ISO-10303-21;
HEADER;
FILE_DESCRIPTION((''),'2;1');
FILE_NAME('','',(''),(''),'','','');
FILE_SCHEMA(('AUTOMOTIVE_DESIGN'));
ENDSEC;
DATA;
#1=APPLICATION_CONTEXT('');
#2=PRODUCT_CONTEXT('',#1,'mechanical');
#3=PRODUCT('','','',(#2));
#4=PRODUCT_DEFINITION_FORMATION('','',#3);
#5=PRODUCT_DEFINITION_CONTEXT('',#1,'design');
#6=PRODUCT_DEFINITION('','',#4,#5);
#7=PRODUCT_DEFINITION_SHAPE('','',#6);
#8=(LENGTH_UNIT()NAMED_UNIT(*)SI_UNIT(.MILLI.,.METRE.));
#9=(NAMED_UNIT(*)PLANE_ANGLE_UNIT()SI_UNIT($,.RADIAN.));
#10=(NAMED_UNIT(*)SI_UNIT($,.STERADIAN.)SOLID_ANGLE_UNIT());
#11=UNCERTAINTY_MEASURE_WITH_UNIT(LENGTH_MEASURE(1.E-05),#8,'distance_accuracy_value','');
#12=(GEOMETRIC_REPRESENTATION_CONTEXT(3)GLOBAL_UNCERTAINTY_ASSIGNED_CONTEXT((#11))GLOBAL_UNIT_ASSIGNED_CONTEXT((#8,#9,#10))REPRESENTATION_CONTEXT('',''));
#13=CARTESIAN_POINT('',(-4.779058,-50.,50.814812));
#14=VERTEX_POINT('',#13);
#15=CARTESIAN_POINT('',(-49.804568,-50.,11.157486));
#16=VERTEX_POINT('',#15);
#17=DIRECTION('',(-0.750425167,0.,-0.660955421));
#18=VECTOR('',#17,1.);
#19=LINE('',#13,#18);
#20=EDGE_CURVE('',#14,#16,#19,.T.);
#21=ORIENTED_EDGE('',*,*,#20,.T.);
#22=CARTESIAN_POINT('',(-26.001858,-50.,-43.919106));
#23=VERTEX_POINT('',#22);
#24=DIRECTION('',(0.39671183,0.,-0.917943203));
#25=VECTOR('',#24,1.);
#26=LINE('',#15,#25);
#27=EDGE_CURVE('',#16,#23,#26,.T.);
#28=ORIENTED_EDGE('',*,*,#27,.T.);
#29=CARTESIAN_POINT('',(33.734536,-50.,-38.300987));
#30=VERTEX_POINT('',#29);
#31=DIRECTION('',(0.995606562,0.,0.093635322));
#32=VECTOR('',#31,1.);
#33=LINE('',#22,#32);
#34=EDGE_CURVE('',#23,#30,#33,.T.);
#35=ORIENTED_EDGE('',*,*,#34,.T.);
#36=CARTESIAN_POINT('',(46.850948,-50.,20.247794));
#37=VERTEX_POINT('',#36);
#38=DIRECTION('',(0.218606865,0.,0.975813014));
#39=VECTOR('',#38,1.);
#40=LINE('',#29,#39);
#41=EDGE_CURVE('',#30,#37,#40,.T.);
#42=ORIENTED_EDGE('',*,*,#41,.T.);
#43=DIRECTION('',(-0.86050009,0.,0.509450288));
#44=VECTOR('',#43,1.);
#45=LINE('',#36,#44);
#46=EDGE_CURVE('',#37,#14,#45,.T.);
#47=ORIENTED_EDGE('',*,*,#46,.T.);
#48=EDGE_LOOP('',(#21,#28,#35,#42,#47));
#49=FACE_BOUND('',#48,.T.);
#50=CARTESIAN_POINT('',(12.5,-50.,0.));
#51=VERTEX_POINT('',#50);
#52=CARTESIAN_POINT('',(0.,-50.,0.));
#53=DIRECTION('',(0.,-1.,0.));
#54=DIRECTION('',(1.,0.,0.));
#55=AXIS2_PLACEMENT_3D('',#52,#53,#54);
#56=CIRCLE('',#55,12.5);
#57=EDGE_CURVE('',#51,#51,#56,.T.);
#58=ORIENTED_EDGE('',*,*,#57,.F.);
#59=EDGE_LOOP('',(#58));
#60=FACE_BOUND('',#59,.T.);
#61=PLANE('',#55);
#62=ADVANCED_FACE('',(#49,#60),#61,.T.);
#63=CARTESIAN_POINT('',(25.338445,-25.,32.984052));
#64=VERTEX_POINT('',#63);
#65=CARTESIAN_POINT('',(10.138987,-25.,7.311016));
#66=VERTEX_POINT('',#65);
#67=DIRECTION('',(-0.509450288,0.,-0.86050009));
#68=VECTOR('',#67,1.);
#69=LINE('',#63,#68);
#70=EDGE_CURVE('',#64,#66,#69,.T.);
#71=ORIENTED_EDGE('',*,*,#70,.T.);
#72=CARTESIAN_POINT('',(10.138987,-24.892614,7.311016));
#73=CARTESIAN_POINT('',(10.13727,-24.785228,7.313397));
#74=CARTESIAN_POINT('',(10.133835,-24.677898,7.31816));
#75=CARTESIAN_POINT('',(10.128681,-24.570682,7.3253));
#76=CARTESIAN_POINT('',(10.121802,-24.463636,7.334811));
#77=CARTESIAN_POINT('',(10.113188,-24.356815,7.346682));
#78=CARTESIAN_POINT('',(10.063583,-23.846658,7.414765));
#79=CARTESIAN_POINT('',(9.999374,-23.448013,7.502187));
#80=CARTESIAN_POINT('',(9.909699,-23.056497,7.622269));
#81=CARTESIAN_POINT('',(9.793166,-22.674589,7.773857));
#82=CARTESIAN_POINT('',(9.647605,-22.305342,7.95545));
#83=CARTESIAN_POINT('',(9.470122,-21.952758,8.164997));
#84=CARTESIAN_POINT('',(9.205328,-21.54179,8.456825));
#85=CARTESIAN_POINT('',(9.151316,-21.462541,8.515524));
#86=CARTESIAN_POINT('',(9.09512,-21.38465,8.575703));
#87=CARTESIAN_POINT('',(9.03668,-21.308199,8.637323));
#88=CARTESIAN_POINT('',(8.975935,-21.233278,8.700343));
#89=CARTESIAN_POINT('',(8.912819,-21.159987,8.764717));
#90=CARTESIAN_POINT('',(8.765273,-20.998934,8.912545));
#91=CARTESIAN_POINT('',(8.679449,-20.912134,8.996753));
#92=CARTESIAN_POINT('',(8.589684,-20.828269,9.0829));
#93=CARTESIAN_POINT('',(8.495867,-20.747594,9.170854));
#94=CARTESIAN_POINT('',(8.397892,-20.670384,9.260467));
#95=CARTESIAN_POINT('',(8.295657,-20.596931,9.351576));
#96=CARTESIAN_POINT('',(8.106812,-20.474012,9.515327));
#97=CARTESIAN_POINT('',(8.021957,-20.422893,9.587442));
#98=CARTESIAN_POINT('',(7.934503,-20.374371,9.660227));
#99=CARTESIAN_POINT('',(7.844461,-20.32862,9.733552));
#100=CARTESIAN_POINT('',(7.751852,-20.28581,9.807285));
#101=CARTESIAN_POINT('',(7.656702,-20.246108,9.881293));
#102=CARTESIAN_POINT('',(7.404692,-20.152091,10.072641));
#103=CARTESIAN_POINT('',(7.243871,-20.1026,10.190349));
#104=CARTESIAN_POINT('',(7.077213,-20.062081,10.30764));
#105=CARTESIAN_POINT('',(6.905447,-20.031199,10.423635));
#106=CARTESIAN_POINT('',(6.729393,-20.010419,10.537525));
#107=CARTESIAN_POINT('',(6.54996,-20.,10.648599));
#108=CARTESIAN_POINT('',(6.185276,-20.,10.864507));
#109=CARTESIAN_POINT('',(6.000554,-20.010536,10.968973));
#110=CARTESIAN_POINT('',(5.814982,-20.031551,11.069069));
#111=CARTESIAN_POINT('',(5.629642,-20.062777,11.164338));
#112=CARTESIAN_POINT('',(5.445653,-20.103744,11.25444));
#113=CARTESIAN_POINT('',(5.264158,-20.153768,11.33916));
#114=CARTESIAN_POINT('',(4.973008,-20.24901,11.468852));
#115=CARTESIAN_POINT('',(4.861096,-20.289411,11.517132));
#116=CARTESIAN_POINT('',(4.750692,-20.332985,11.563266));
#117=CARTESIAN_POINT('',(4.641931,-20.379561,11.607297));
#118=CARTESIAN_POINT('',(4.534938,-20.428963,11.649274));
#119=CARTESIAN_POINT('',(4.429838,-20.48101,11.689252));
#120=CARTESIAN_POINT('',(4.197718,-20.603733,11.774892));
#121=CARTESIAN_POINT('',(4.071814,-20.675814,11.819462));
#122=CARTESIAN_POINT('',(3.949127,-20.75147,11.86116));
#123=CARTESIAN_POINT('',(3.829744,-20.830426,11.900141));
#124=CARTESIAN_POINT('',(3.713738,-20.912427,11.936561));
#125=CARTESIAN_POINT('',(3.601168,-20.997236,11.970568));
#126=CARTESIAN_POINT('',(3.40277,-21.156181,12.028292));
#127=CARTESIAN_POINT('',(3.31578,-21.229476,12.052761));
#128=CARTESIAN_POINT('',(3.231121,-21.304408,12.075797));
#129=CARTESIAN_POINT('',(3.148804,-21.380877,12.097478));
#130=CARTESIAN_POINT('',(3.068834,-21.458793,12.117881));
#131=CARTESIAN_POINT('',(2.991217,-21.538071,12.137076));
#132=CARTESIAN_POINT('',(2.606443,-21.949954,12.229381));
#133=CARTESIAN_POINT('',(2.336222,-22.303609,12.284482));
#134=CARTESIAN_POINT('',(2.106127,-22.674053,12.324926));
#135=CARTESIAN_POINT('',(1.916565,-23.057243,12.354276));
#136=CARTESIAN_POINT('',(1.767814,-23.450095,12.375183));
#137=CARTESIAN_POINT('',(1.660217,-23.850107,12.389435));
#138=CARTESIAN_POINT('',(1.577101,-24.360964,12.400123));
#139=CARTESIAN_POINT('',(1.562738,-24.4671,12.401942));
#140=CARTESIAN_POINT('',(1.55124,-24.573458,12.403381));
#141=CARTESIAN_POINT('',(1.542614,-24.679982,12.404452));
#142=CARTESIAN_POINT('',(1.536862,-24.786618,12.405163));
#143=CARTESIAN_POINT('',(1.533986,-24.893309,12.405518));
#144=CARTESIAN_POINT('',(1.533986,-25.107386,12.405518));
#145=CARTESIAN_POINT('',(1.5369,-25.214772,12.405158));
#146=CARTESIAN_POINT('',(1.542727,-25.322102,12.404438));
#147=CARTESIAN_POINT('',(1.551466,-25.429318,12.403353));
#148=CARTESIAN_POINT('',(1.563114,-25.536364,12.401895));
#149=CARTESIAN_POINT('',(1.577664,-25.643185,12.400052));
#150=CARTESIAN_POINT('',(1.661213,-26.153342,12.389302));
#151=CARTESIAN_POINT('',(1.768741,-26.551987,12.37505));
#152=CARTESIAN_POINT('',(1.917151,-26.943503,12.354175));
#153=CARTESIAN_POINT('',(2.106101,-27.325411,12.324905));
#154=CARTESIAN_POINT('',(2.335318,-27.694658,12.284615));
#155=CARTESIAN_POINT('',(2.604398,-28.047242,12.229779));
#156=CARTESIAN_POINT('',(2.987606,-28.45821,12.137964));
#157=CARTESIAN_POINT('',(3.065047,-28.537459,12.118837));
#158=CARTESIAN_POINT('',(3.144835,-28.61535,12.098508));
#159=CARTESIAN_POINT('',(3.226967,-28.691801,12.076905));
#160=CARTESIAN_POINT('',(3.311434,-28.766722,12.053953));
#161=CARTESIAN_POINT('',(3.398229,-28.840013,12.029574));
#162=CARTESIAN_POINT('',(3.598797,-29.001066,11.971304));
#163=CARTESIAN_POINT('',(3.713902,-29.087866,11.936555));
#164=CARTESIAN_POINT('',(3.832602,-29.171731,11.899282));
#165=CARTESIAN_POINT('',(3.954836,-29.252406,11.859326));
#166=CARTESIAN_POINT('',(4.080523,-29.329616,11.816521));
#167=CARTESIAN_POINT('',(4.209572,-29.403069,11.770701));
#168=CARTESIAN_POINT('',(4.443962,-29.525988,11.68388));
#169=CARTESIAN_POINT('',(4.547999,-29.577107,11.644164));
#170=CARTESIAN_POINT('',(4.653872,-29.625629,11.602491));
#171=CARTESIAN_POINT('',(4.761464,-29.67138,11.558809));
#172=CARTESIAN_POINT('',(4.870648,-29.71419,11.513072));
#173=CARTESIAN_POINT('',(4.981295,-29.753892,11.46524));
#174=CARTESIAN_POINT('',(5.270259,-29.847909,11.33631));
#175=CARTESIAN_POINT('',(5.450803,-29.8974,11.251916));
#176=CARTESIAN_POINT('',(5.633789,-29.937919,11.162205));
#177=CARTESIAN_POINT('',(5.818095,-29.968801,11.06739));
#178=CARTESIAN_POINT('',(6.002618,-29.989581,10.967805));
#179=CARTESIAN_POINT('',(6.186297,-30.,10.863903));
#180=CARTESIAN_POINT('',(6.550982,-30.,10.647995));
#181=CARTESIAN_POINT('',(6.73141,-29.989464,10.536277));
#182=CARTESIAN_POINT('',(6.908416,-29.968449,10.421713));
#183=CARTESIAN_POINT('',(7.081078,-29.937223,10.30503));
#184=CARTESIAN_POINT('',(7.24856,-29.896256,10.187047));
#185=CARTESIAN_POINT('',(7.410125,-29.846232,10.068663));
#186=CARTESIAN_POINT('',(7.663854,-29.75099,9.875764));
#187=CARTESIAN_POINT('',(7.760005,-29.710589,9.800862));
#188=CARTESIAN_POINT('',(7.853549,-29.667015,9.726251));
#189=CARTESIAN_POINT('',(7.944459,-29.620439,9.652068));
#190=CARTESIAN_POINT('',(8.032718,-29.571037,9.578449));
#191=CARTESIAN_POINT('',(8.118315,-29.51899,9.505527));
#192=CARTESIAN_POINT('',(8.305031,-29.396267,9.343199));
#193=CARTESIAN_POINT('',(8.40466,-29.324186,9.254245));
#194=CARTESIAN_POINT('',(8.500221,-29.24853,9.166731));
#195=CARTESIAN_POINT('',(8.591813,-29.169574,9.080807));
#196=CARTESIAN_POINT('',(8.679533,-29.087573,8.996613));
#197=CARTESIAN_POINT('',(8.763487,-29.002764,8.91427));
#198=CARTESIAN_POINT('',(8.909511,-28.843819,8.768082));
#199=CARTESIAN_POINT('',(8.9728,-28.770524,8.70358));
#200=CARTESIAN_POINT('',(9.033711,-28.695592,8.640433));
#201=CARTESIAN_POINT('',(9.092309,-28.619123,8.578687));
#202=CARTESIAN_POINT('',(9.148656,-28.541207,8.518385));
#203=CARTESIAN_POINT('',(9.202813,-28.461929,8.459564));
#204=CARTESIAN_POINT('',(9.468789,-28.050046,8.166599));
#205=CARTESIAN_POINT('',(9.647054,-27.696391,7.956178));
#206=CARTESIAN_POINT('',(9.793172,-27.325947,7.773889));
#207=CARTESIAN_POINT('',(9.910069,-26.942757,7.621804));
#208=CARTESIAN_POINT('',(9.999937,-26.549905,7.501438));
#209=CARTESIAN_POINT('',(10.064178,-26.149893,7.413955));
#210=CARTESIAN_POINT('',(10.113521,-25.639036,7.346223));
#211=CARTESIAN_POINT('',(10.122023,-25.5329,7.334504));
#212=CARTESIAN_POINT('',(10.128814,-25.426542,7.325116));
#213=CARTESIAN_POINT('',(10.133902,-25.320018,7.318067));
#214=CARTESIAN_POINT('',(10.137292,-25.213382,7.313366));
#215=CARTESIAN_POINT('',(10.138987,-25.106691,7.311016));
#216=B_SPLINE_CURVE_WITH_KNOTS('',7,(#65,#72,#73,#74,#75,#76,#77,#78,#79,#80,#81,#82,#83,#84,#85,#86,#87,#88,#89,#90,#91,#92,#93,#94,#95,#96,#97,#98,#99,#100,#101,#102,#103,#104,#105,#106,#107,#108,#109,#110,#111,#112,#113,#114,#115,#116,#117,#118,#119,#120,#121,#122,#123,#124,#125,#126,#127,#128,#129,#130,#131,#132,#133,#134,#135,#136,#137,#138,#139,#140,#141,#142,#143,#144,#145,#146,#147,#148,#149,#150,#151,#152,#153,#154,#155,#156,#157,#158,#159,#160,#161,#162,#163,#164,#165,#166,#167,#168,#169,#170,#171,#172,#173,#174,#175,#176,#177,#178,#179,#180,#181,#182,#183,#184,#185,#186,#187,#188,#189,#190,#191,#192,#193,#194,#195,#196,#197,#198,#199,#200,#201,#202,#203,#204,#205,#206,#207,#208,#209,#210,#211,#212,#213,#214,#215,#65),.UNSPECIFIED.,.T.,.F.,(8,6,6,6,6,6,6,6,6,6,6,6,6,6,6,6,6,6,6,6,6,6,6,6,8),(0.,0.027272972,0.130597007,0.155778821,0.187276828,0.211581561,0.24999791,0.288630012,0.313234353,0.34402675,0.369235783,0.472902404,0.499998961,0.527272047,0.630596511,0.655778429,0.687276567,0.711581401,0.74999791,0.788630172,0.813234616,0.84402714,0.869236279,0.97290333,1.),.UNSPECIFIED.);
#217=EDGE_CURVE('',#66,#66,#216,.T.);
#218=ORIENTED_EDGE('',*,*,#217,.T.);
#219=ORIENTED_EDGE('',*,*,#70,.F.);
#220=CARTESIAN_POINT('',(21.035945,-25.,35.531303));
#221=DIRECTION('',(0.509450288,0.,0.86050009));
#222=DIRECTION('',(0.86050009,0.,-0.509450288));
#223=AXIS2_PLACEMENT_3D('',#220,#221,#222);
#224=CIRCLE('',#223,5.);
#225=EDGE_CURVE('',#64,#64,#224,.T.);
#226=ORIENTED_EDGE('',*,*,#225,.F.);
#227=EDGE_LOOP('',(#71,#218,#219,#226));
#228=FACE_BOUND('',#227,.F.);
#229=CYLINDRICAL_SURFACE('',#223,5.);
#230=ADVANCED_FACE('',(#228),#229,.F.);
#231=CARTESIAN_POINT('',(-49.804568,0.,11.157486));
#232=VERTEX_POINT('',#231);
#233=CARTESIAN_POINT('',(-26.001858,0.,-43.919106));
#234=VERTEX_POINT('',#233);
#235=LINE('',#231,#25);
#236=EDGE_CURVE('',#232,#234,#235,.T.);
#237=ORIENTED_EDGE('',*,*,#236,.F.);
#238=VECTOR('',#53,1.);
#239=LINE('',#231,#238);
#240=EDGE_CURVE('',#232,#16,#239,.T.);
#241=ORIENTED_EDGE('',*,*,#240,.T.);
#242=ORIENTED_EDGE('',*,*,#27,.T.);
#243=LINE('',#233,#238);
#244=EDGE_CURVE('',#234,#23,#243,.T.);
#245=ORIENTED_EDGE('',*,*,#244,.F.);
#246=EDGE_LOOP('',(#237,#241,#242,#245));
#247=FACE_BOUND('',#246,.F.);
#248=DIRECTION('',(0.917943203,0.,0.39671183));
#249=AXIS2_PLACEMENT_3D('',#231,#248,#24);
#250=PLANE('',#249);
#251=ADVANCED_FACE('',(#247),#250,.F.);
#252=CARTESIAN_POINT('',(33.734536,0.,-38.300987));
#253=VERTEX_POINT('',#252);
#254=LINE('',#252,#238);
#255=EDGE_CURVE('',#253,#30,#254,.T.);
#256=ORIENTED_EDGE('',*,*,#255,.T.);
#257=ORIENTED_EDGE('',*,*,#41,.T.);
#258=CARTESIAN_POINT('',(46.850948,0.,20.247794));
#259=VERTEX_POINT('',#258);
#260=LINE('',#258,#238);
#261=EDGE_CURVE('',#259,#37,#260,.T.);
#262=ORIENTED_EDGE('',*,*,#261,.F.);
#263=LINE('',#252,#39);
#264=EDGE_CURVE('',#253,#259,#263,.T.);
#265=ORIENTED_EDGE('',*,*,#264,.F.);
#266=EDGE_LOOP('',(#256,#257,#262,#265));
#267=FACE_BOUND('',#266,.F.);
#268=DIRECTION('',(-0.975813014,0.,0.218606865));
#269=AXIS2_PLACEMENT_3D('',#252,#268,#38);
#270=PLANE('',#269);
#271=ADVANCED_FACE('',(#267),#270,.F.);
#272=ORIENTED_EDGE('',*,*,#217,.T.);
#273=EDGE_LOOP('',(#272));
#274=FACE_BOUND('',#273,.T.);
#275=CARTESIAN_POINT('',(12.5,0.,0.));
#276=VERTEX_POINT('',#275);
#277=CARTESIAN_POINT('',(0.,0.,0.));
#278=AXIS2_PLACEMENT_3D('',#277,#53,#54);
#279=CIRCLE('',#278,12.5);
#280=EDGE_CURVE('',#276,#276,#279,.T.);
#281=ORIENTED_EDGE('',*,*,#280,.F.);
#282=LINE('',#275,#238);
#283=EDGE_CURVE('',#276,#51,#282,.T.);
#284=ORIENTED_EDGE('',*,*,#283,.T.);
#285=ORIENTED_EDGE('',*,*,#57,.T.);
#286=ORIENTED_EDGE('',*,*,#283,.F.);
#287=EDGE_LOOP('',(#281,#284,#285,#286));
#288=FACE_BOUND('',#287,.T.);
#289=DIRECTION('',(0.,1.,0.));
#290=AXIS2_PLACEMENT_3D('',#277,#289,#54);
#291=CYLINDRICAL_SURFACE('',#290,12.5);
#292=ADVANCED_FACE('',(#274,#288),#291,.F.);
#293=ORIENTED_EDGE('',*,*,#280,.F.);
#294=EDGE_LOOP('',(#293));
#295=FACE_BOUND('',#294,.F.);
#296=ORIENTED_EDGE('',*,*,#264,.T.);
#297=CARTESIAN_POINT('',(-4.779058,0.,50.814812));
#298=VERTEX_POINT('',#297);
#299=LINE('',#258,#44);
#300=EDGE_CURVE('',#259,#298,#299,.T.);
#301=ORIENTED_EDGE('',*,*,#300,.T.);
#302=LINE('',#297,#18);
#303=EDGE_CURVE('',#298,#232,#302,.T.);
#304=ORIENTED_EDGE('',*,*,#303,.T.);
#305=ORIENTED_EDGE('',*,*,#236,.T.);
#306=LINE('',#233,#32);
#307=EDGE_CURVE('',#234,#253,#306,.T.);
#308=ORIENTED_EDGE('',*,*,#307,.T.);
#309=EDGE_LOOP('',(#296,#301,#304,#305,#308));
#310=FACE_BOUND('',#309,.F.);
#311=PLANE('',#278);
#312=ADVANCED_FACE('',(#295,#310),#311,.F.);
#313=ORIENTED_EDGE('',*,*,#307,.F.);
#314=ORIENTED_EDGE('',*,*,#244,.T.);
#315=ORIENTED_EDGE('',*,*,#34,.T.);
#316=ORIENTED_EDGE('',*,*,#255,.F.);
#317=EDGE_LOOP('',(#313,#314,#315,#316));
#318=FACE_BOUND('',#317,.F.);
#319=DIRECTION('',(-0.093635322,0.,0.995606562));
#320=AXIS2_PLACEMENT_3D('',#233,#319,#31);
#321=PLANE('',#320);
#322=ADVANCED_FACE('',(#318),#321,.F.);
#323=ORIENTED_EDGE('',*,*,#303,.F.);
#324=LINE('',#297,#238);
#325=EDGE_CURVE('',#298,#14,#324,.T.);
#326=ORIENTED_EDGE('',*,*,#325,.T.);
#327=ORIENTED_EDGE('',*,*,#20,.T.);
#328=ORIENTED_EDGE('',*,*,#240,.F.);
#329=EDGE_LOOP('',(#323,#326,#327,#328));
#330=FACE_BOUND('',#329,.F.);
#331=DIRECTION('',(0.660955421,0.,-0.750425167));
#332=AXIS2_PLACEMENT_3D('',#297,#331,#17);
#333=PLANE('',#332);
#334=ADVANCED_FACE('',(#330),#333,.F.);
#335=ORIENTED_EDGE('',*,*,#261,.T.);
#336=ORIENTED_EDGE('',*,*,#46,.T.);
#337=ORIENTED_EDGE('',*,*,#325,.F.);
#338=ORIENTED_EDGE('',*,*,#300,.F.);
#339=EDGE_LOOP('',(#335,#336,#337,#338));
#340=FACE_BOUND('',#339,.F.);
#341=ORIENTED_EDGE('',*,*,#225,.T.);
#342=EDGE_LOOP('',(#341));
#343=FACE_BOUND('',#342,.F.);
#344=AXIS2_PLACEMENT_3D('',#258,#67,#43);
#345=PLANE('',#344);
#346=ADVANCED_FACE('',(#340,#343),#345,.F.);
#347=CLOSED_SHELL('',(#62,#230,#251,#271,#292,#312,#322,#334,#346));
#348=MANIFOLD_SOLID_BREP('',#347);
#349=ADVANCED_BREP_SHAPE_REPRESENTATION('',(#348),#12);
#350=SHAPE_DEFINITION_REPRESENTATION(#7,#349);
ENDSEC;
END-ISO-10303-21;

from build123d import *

# Parameters (mm, degrees)
F0_R     = 12.5
F1_DEPTH = 50
F2_R     = 5
F3_DEPTH = 29.8360184767


with BuildPart() as f1:
    # F0 (on Front) → F1 (new body)
    with BuildSketch(Plane.XZ):
        Polygon((46.8509476544, 20.2477943437), (-4.7790577234, 50.8148116121), (-49.8045677617, 11.1574863645), (-26.0018579483, -43.9191058098), (33.7345357789, -38.3009865105), align=None)
        Circle(F0_R, mode=Mode.SUBTRACT)
    extrude(amount=F1_DEPTH)

    # F2 (on face) → F3 (cut, through all)
    with BuildSketch(Plane(origin=(21.0359449655, 0, 35.5313029779), x_dir=(0.8605000896, 0, -0.5094502878), z_dir=(0.5094502878, 0, 0.8605000896))):
        with Locations((0, -25)):
            Circle(F2_R)
    extrude(amount=-F3_DEPTH, mode=Mode.SUBTRACT)


solid = f1.part
